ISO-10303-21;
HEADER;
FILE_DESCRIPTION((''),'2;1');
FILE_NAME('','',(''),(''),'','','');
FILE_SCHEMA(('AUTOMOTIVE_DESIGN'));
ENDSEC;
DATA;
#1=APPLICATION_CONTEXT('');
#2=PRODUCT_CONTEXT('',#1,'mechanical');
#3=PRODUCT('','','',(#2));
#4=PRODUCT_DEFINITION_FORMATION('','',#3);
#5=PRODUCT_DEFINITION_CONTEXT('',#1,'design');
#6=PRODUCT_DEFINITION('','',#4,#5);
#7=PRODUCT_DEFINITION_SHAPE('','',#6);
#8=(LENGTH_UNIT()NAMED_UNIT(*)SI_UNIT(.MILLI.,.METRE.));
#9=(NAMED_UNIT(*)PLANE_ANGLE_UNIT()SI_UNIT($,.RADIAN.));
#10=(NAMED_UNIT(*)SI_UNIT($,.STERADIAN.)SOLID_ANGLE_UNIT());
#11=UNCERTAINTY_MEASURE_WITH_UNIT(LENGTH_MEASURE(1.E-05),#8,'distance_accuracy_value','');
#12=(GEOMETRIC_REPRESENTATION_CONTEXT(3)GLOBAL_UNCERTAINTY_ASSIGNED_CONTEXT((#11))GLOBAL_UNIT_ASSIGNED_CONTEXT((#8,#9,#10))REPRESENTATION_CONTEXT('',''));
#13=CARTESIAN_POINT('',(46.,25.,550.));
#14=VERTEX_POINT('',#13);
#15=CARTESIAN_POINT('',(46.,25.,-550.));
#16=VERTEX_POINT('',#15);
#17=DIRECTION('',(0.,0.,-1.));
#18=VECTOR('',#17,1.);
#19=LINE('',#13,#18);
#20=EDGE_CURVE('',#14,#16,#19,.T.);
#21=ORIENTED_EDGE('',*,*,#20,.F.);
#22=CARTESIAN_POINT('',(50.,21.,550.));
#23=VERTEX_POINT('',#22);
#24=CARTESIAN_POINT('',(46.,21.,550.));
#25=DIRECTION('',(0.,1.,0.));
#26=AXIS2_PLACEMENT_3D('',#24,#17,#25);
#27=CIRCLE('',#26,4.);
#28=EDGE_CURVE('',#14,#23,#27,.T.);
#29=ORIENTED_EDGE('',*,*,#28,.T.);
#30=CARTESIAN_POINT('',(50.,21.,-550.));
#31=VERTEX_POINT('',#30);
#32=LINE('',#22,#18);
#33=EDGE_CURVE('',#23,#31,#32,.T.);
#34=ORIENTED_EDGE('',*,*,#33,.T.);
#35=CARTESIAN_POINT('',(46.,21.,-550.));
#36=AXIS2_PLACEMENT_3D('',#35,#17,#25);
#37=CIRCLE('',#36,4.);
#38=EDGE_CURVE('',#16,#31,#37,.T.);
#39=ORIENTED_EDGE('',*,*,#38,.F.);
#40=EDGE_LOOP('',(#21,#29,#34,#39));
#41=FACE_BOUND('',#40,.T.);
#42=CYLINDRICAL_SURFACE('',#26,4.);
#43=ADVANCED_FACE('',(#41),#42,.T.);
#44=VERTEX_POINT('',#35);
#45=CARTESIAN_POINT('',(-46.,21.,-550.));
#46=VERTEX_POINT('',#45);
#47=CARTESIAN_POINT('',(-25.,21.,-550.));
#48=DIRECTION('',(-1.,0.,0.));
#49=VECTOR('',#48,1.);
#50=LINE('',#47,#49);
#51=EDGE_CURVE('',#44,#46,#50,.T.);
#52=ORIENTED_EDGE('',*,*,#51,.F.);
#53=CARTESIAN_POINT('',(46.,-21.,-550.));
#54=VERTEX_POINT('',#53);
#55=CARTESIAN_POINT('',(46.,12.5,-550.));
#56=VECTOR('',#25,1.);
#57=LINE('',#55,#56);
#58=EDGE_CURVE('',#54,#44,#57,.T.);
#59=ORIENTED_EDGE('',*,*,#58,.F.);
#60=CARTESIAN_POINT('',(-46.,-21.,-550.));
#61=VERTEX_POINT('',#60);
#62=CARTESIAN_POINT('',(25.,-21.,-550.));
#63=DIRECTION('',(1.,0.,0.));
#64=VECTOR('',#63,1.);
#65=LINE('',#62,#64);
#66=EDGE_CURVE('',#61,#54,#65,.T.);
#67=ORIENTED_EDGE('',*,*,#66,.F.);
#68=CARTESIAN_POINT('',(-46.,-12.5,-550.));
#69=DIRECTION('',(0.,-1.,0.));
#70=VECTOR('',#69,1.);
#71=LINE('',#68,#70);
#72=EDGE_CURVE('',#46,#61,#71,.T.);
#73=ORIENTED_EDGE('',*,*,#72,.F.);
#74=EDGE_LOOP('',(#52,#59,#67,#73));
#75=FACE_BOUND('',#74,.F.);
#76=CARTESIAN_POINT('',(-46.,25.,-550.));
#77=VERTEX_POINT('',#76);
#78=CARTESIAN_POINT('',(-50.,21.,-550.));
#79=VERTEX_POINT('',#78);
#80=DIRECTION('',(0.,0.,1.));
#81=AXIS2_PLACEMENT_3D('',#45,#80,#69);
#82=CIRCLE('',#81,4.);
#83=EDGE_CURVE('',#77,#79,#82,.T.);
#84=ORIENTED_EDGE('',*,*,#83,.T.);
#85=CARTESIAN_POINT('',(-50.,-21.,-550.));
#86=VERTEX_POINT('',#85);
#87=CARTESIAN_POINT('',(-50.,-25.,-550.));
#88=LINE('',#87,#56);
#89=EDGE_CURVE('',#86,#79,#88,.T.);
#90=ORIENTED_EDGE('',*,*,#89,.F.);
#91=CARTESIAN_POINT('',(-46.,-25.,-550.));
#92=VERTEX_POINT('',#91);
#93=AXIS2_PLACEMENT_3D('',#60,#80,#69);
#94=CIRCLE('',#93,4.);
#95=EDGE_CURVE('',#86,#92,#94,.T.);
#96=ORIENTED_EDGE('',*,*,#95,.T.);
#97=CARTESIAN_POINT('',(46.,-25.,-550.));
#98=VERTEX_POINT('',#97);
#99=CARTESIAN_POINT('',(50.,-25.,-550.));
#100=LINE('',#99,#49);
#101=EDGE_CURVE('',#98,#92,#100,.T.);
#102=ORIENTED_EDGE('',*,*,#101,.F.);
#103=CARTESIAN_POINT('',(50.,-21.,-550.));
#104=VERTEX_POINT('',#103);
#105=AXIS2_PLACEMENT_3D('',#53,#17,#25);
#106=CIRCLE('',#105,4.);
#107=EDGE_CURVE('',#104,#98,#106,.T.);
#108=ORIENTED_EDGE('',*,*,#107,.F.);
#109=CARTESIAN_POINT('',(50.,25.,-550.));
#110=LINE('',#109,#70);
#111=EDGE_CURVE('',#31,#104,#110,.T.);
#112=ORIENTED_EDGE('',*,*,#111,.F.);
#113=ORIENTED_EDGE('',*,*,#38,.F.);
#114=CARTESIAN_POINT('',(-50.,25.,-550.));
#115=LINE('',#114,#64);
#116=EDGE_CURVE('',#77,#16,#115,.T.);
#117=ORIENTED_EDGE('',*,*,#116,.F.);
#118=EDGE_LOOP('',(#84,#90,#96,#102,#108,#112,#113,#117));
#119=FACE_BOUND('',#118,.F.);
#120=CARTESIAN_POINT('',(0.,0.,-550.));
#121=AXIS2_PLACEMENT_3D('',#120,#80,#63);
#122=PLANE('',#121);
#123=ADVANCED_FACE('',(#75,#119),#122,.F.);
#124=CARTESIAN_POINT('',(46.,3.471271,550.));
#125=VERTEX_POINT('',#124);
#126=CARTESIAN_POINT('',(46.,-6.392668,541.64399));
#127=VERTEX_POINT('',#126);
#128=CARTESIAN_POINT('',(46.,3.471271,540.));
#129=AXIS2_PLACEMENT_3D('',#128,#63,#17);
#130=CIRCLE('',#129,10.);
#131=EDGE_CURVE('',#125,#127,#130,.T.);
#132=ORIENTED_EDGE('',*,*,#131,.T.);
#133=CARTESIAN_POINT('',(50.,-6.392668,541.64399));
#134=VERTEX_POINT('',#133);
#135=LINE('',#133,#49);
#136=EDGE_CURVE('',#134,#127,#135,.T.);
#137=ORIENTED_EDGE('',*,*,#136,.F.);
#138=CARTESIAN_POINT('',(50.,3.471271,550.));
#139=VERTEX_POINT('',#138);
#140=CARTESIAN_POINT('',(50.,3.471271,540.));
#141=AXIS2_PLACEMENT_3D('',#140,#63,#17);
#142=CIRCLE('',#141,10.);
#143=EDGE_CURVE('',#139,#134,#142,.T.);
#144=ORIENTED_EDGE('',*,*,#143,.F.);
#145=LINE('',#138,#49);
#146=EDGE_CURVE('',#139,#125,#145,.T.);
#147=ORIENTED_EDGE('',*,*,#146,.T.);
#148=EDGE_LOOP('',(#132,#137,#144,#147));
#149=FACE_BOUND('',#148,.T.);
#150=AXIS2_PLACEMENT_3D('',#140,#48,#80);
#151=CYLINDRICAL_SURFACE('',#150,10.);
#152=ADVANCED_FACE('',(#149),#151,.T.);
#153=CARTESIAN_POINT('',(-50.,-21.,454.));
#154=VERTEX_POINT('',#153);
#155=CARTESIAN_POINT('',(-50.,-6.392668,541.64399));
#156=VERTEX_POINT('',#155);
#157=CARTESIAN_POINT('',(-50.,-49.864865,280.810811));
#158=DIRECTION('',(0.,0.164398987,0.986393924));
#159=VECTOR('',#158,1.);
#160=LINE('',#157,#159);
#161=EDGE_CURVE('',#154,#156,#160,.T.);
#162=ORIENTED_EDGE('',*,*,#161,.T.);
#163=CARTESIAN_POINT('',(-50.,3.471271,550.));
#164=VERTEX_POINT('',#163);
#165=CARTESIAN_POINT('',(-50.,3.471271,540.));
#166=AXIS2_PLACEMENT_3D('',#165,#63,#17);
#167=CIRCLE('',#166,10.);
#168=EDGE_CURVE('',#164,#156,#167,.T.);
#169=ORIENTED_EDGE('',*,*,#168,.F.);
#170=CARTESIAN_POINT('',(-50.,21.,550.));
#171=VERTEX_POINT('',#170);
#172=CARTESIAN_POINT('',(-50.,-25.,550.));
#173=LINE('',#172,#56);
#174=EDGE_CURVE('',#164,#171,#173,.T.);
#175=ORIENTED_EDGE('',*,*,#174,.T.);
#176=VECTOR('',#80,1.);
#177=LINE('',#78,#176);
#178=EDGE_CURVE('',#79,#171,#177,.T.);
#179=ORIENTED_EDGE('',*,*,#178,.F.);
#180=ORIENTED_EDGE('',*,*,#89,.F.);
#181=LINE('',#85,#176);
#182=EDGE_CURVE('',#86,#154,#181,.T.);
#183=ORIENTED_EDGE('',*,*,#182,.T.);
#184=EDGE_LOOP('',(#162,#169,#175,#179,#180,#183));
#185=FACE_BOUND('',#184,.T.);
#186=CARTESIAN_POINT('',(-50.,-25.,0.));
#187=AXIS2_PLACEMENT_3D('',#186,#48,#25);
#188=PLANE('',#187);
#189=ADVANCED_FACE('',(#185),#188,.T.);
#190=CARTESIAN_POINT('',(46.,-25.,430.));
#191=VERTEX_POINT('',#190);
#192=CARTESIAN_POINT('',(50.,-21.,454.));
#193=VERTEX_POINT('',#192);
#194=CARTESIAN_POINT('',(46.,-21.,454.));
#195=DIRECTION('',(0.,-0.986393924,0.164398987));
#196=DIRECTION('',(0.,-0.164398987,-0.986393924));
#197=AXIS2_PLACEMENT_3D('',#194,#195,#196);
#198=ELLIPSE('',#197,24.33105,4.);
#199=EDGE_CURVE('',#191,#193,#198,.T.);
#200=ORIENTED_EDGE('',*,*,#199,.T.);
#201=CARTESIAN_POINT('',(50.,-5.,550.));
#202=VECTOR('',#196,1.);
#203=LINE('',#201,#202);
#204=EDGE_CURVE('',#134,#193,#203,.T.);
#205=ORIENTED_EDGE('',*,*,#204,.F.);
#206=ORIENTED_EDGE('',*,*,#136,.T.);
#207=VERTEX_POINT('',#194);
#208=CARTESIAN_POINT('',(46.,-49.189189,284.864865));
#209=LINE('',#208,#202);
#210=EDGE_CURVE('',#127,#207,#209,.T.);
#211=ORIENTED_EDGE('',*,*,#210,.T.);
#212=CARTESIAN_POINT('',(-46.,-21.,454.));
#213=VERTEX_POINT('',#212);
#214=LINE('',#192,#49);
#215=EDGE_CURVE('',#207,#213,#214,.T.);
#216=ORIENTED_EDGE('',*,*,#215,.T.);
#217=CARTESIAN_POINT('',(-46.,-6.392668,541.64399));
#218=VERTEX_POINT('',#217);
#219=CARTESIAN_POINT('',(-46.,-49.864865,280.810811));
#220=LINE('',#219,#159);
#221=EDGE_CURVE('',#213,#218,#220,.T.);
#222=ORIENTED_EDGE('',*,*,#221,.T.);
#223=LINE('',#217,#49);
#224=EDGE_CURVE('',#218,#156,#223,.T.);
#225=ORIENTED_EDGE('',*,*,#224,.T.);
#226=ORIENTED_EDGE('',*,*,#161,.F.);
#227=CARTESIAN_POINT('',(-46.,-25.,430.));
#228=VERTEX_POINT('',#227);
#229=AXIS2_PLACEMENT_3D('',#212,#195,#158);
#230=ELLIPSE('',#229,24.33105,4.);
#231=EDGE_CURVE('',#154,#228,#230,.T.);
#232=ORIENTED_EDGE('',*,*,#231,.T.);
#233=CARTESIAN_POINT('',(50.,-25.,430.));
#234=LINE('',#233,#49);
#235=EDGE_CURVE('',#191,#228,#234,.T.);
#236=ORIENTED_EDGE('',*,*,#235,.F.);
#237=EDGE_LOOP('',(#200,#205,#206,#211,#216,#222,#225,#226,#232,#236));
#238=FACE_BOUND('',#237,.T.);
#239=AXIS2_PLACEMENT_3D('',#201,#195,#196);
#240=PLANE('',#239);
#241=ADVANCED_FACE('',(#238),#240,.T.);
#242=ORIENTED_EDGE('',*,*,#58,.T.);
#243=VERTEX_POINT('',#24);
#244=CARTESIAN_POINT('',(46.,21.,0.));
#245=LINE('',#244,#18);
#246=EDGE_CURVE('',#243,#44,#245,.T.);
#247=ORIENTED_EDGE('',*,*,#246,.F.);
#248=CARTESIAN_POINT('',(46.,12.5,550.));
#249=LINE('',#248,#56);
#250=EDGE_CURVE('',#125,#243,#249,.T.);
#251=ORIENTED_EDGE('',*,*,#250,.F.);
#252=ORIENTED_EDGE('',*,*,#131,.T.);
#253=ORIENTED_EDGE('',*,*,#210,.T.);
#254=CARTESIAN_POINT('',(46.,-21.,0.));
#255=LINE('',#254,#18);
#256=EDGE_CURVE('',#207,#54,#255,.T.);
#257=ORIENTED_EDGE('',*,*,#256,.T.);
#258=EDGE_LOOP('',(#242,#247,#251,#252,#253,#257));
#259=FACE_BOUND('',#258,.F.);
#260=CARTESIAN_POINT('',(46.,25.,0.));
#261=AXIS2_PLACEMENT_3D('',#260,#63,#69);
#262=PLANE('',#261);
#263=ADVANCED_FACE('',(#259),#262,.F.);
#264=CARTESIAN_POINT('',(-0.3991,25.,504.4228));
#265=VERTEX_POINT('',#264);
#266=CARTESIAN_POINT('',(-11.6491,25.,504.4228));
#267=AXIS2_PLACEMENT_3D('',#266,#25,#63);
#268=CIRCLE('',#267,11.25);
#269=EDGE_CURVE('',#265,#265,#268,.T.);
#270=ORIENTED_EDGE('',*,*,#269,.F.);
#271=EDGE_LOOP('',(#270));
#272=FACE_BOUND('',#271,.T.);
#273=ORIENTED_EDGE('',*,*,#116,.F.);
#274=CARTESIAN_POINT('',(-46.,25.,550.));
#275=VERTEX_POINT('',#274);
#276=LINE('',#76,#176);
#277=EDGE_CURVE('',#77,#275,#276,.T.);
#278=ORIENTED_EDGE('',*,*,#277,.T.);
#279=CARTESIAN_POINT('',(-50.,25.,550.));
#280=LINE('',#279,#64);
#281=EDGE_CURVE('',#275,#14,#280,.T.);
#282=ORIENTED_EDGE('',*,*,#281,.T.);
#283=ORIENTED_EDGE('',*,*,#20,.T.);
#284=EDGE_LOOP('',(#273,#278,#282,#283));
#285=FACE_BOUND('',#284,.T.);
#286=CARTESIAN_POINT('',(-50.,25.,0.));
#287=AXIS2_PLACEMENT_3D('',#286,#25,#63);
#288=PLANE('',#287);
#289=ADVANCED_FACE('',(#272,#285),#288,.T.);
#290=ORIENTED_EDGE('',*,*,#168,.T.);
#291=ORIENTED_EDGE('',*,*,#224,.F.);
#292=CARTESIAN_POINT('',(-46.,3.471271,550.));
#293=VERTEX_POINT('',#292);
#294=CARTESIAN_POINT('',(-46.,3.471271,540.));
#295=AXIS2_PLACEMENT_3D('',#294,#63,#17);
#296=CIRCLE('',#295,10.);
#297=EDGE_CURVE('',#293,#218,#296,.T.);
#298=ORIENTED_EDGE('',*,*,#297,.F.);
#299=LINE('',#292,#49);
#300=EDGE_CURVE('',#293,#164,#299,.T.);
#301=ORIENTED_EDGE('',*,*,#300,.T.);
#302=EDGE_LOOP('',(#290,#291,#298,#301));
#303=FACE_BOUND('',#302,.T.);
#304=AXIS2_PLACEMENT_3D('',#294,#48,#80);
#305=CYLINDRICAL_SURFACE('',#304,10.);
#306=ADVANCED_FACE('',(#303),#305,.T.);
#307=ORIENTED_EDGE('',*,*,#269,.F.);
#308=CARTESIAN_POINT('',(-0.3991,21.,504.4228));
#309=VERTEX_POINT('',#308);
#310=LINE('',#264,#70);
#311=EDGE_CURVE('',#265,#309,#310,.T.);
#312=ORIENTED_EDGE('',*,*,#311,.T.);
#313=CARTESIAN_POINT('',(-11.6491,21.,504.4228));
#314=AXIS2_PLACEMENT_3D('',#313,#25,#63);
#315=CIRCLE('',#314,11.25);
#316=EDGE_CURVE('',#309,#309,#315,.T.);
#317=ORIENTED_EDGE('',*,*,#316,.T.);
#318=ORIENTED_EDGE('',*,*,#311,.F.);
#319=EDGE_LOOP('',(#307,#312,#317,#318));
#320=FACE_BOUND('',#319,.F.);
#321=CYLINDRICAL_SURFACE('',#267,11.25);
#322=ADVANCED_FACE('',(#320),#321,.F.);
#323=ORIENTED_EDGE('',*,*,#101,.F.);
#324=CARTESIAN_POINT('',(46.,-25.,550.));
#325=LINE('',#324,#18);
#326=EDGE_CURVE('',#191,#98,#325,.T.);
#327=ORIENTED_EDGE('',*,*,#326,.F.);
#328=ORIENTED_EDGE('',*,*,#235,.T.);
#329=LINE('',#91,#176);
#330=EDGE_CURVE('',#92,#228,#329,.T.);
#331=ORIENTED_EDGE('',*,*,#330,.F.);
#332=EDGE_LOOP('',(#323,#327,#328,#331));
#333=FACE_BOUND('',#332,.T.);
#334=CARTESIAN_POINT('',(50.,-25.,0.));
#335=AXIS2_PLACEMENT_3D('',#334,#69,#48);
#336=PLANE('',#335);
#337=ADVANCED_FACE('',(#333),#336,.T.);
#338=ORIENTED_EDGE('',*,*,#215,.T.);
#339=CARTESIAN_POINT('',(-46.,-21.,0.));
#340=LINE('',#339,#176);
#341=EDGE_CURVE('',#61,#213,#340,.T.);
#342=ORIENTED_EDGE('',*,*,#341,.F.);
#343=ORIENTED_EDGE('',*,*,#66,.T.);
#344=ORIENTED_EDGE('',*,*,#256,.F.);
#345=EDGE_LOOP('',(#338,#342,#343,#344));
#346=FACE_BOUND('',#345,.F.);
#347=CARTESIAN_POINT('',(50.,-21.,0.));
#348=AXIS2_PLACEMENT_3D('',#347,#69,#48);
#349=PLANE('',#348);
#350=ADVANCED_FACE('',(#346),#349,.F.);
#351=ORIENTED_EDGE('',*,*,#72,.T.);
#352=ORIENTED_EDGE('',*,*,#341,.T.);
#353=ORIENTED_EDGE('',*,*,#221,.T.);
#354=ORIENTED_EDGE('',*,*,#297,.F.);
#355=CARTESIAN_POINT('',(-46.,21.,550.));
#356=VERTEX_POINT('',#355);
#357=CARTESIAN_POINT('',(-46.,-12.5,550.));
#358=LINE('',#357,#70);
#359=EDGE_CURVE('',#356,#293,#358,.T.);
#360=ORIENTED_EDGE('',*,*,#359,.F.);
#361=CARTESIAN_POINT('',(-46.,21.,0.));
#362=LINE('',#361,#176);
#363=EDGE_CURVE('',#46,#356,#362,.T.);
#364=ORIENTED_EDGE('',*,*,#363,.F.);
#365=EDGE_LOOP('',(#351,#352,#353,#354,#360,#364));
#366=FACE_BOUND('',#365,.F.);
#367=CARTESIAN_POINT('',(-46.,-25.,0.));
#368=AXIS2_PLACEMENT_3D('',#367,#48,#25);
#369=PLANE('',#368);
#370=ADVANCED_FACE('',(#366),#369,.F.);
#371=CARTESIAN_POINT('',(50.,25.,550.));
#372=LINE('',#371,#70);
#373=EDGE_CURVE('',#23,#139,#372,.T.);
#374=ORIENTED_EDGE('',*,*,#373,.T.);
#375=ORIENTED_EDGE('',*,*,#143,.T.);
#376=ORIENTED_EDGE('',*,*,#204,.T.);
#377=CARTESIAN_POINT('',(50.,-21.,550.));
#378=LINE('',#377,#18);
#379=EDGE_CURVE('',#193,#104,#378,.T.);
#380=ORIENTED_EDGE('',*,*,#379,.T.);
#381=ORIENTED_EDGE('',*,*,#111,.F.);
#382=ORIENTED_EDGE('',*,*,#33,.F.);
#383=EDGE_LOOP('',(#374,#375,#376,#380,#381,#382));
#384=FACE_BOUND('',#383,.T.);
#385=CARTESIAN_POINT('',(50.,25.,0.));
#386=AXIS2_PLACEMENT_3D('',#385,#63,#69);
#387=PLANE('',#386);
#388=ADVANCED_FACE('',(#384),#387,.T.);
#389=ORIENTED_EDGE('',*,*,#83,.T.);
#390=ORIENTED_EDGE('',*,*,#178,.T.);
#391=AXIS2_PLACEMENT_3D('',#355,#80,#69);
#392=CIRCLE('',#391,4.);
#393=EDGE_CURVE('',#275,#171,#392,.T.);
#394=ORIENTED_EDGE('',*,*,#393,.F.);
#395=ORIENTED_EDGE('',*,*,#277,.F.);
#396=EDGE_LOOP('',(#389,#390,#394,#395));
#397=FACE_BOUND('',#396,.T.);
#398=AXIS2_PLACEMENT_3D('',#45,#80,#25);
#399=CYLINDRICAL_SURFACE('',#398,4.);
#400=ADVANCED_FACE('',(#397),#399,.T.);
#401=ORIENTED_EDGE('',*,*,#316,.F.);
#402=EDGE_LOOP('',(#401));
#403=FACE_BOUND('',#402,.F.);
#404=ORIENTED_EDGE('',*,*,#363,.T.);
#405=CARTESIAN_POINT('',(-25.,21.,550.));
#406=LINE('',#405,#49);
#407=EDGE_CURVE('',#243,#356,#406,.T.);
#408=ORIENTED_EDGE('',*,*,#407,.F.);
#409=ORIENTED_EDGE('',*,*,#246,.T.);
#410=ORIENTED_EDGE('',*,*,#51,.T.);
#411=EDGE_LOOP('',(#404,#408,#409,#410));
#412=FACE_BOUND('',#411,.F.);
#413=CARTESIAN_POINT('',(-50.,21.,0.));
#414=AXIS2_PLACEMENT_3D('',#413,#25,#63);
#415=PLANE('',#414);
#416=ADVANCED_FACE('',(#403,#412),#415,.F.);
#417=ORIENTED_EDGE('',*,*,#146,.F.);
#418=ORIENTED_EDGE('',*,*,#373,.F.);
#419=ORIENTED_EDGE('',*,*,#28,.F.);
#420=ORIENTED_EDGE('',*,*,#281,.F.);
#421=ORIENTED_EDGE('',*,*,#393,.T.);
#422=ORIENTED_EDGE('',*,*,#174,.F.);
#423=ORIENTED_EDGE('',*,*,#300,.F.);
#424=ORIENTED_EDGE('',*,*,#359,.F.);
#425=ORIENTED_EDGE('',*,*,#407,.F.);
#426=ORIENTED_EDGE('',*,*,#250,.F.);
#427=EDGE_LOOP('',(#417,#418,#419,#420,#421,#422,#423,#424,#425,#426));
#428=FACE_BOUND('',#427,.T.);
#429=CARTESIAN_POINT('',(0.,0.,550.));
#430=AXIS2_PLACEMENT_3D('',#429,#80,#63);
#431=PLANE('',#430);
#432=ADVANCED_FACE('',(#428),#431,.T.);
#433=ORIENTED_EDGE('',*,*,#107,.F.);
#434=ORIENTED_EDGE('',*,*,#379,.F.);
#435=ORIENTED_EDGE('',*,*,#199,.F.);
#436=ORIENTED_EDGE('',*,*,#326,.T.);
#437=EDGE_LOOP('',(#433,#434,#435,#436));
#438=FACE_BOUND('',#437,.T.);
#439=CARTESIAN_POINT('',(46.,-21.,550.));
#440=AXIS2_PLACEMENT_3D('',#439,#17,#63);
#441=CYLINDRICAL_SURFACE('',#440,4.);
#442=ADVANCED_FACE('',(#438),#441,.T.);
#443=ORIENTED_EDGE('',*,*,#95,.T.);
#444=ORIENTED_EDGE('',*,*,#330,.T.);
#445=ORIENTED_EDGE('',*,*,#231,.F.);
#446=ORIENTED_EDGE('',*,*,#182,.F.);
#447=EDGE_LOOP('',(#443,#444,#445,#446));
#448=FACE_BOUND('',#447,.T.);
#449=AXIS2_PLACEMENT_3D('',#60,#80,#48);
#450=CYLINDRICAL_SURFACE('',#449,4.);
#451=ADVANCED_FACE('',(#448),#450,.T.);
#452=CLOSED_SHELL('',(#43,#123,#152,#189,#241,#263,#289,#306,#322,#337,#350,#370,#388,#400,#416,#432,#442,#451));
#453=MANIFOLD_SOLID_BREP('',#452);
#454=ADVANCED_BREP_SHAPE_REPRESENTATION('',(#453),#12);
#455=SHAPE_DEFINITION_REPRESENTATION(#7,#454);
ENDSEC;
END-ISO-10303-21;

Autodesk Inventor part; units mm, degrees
ref_plane "YZ Plane" through (0, 0, 0) normal (1, 0, 0) x (0, 1, 0)
ref_plane "XZ Plane" through (0, 0, 0) normal (0, 1, 0) x (-1, 0, 0)
ref_plane "XY Plane" through (0, 0, 0) normal (0, 0, 1) x (1, 0, 0)
sketch "Sketch1" plane through (0, 0, 0) normal (0, 0, 1) x (1, 0, 0)
  line L0 (-50, 25) -> (50, 25)
  line L1 (50, 25) -> (50, -25)
  line L2 (50, -25) -> (-50, -25)
  line L3 (-50, -25) -> (-50, 25)
  line L4 (-50, 25) -> (50, -25) construction
  line L5 (50, 25) -> (-50, -25) construction
  point P0 (0, 0)
  dimension "d0" = 100
  dimension "d1" = 50
extrude "Extrusion1" add sketch "Sketch1" along normal mid plane 1100
fillet "Fillet1" radius 4 4 edges at (50, -25, 0) (50, 25, 0) (-50, -25, 0) (-50, 25, 0)
shell "Shell1" thickness 4 removed faces 2 at (-15.3333, -8.3333, 550) at (-15.3333, -8.3333, -550)
sketch "Sketch2" plane through (-46, 25, 550) normal (0, 1, 0) x (1, 0, 0)
  circle A0 centre (34.3509, 45.5772) radius 11.25 projected
  point P0 (46, 550)
extrude "Extrusion2" cut sketch "Sketch2" against normal through all
sketch "Sketch3" plane through (50, -21, 550) normal (1, 0, 0) x (0, 0, -1)
  line L0 (0, -4) -> (1100, -4) projected
  line L1 (0, 42) -> (0, 0) projected
  line L2 (0, 16) -> (120, -4)
  line L3 (0, -11.4428) -> (0, 16)
  line L4 (120, -4) -> (120, -11.4428)
  line L5 (120, -11.4428) -> (0, -11.4428)
  point P0 (550, 21)
  dimension "d8" = 120
  dimension "d9" = 20
extrude "Extrusion3" cut sketch "Sketch3" against normal blind 1100
fillet "Fillet2" radius 10 2 edges at (48, -5, 550) (-48, -5, 550)
sketch "Sketch4" plane through (-46, 25, 550) normal (0, 1, 0) x (1, 0, 0)
  line L0 (90.5966, 11.6068) -> (90.5966, 2.7213) construction
  line L1 (90.5966, 2.7213) -> (86.2672, 2.7213) construction
  line L2 (86.2672, 2.7213) -> (86.2672, 11.6068) construction
  line L3 (86.2672, 11.6068) -> (90.5966, 11.6068) construction
  point P0 (46, 550)
properties part number "MC02-1"
